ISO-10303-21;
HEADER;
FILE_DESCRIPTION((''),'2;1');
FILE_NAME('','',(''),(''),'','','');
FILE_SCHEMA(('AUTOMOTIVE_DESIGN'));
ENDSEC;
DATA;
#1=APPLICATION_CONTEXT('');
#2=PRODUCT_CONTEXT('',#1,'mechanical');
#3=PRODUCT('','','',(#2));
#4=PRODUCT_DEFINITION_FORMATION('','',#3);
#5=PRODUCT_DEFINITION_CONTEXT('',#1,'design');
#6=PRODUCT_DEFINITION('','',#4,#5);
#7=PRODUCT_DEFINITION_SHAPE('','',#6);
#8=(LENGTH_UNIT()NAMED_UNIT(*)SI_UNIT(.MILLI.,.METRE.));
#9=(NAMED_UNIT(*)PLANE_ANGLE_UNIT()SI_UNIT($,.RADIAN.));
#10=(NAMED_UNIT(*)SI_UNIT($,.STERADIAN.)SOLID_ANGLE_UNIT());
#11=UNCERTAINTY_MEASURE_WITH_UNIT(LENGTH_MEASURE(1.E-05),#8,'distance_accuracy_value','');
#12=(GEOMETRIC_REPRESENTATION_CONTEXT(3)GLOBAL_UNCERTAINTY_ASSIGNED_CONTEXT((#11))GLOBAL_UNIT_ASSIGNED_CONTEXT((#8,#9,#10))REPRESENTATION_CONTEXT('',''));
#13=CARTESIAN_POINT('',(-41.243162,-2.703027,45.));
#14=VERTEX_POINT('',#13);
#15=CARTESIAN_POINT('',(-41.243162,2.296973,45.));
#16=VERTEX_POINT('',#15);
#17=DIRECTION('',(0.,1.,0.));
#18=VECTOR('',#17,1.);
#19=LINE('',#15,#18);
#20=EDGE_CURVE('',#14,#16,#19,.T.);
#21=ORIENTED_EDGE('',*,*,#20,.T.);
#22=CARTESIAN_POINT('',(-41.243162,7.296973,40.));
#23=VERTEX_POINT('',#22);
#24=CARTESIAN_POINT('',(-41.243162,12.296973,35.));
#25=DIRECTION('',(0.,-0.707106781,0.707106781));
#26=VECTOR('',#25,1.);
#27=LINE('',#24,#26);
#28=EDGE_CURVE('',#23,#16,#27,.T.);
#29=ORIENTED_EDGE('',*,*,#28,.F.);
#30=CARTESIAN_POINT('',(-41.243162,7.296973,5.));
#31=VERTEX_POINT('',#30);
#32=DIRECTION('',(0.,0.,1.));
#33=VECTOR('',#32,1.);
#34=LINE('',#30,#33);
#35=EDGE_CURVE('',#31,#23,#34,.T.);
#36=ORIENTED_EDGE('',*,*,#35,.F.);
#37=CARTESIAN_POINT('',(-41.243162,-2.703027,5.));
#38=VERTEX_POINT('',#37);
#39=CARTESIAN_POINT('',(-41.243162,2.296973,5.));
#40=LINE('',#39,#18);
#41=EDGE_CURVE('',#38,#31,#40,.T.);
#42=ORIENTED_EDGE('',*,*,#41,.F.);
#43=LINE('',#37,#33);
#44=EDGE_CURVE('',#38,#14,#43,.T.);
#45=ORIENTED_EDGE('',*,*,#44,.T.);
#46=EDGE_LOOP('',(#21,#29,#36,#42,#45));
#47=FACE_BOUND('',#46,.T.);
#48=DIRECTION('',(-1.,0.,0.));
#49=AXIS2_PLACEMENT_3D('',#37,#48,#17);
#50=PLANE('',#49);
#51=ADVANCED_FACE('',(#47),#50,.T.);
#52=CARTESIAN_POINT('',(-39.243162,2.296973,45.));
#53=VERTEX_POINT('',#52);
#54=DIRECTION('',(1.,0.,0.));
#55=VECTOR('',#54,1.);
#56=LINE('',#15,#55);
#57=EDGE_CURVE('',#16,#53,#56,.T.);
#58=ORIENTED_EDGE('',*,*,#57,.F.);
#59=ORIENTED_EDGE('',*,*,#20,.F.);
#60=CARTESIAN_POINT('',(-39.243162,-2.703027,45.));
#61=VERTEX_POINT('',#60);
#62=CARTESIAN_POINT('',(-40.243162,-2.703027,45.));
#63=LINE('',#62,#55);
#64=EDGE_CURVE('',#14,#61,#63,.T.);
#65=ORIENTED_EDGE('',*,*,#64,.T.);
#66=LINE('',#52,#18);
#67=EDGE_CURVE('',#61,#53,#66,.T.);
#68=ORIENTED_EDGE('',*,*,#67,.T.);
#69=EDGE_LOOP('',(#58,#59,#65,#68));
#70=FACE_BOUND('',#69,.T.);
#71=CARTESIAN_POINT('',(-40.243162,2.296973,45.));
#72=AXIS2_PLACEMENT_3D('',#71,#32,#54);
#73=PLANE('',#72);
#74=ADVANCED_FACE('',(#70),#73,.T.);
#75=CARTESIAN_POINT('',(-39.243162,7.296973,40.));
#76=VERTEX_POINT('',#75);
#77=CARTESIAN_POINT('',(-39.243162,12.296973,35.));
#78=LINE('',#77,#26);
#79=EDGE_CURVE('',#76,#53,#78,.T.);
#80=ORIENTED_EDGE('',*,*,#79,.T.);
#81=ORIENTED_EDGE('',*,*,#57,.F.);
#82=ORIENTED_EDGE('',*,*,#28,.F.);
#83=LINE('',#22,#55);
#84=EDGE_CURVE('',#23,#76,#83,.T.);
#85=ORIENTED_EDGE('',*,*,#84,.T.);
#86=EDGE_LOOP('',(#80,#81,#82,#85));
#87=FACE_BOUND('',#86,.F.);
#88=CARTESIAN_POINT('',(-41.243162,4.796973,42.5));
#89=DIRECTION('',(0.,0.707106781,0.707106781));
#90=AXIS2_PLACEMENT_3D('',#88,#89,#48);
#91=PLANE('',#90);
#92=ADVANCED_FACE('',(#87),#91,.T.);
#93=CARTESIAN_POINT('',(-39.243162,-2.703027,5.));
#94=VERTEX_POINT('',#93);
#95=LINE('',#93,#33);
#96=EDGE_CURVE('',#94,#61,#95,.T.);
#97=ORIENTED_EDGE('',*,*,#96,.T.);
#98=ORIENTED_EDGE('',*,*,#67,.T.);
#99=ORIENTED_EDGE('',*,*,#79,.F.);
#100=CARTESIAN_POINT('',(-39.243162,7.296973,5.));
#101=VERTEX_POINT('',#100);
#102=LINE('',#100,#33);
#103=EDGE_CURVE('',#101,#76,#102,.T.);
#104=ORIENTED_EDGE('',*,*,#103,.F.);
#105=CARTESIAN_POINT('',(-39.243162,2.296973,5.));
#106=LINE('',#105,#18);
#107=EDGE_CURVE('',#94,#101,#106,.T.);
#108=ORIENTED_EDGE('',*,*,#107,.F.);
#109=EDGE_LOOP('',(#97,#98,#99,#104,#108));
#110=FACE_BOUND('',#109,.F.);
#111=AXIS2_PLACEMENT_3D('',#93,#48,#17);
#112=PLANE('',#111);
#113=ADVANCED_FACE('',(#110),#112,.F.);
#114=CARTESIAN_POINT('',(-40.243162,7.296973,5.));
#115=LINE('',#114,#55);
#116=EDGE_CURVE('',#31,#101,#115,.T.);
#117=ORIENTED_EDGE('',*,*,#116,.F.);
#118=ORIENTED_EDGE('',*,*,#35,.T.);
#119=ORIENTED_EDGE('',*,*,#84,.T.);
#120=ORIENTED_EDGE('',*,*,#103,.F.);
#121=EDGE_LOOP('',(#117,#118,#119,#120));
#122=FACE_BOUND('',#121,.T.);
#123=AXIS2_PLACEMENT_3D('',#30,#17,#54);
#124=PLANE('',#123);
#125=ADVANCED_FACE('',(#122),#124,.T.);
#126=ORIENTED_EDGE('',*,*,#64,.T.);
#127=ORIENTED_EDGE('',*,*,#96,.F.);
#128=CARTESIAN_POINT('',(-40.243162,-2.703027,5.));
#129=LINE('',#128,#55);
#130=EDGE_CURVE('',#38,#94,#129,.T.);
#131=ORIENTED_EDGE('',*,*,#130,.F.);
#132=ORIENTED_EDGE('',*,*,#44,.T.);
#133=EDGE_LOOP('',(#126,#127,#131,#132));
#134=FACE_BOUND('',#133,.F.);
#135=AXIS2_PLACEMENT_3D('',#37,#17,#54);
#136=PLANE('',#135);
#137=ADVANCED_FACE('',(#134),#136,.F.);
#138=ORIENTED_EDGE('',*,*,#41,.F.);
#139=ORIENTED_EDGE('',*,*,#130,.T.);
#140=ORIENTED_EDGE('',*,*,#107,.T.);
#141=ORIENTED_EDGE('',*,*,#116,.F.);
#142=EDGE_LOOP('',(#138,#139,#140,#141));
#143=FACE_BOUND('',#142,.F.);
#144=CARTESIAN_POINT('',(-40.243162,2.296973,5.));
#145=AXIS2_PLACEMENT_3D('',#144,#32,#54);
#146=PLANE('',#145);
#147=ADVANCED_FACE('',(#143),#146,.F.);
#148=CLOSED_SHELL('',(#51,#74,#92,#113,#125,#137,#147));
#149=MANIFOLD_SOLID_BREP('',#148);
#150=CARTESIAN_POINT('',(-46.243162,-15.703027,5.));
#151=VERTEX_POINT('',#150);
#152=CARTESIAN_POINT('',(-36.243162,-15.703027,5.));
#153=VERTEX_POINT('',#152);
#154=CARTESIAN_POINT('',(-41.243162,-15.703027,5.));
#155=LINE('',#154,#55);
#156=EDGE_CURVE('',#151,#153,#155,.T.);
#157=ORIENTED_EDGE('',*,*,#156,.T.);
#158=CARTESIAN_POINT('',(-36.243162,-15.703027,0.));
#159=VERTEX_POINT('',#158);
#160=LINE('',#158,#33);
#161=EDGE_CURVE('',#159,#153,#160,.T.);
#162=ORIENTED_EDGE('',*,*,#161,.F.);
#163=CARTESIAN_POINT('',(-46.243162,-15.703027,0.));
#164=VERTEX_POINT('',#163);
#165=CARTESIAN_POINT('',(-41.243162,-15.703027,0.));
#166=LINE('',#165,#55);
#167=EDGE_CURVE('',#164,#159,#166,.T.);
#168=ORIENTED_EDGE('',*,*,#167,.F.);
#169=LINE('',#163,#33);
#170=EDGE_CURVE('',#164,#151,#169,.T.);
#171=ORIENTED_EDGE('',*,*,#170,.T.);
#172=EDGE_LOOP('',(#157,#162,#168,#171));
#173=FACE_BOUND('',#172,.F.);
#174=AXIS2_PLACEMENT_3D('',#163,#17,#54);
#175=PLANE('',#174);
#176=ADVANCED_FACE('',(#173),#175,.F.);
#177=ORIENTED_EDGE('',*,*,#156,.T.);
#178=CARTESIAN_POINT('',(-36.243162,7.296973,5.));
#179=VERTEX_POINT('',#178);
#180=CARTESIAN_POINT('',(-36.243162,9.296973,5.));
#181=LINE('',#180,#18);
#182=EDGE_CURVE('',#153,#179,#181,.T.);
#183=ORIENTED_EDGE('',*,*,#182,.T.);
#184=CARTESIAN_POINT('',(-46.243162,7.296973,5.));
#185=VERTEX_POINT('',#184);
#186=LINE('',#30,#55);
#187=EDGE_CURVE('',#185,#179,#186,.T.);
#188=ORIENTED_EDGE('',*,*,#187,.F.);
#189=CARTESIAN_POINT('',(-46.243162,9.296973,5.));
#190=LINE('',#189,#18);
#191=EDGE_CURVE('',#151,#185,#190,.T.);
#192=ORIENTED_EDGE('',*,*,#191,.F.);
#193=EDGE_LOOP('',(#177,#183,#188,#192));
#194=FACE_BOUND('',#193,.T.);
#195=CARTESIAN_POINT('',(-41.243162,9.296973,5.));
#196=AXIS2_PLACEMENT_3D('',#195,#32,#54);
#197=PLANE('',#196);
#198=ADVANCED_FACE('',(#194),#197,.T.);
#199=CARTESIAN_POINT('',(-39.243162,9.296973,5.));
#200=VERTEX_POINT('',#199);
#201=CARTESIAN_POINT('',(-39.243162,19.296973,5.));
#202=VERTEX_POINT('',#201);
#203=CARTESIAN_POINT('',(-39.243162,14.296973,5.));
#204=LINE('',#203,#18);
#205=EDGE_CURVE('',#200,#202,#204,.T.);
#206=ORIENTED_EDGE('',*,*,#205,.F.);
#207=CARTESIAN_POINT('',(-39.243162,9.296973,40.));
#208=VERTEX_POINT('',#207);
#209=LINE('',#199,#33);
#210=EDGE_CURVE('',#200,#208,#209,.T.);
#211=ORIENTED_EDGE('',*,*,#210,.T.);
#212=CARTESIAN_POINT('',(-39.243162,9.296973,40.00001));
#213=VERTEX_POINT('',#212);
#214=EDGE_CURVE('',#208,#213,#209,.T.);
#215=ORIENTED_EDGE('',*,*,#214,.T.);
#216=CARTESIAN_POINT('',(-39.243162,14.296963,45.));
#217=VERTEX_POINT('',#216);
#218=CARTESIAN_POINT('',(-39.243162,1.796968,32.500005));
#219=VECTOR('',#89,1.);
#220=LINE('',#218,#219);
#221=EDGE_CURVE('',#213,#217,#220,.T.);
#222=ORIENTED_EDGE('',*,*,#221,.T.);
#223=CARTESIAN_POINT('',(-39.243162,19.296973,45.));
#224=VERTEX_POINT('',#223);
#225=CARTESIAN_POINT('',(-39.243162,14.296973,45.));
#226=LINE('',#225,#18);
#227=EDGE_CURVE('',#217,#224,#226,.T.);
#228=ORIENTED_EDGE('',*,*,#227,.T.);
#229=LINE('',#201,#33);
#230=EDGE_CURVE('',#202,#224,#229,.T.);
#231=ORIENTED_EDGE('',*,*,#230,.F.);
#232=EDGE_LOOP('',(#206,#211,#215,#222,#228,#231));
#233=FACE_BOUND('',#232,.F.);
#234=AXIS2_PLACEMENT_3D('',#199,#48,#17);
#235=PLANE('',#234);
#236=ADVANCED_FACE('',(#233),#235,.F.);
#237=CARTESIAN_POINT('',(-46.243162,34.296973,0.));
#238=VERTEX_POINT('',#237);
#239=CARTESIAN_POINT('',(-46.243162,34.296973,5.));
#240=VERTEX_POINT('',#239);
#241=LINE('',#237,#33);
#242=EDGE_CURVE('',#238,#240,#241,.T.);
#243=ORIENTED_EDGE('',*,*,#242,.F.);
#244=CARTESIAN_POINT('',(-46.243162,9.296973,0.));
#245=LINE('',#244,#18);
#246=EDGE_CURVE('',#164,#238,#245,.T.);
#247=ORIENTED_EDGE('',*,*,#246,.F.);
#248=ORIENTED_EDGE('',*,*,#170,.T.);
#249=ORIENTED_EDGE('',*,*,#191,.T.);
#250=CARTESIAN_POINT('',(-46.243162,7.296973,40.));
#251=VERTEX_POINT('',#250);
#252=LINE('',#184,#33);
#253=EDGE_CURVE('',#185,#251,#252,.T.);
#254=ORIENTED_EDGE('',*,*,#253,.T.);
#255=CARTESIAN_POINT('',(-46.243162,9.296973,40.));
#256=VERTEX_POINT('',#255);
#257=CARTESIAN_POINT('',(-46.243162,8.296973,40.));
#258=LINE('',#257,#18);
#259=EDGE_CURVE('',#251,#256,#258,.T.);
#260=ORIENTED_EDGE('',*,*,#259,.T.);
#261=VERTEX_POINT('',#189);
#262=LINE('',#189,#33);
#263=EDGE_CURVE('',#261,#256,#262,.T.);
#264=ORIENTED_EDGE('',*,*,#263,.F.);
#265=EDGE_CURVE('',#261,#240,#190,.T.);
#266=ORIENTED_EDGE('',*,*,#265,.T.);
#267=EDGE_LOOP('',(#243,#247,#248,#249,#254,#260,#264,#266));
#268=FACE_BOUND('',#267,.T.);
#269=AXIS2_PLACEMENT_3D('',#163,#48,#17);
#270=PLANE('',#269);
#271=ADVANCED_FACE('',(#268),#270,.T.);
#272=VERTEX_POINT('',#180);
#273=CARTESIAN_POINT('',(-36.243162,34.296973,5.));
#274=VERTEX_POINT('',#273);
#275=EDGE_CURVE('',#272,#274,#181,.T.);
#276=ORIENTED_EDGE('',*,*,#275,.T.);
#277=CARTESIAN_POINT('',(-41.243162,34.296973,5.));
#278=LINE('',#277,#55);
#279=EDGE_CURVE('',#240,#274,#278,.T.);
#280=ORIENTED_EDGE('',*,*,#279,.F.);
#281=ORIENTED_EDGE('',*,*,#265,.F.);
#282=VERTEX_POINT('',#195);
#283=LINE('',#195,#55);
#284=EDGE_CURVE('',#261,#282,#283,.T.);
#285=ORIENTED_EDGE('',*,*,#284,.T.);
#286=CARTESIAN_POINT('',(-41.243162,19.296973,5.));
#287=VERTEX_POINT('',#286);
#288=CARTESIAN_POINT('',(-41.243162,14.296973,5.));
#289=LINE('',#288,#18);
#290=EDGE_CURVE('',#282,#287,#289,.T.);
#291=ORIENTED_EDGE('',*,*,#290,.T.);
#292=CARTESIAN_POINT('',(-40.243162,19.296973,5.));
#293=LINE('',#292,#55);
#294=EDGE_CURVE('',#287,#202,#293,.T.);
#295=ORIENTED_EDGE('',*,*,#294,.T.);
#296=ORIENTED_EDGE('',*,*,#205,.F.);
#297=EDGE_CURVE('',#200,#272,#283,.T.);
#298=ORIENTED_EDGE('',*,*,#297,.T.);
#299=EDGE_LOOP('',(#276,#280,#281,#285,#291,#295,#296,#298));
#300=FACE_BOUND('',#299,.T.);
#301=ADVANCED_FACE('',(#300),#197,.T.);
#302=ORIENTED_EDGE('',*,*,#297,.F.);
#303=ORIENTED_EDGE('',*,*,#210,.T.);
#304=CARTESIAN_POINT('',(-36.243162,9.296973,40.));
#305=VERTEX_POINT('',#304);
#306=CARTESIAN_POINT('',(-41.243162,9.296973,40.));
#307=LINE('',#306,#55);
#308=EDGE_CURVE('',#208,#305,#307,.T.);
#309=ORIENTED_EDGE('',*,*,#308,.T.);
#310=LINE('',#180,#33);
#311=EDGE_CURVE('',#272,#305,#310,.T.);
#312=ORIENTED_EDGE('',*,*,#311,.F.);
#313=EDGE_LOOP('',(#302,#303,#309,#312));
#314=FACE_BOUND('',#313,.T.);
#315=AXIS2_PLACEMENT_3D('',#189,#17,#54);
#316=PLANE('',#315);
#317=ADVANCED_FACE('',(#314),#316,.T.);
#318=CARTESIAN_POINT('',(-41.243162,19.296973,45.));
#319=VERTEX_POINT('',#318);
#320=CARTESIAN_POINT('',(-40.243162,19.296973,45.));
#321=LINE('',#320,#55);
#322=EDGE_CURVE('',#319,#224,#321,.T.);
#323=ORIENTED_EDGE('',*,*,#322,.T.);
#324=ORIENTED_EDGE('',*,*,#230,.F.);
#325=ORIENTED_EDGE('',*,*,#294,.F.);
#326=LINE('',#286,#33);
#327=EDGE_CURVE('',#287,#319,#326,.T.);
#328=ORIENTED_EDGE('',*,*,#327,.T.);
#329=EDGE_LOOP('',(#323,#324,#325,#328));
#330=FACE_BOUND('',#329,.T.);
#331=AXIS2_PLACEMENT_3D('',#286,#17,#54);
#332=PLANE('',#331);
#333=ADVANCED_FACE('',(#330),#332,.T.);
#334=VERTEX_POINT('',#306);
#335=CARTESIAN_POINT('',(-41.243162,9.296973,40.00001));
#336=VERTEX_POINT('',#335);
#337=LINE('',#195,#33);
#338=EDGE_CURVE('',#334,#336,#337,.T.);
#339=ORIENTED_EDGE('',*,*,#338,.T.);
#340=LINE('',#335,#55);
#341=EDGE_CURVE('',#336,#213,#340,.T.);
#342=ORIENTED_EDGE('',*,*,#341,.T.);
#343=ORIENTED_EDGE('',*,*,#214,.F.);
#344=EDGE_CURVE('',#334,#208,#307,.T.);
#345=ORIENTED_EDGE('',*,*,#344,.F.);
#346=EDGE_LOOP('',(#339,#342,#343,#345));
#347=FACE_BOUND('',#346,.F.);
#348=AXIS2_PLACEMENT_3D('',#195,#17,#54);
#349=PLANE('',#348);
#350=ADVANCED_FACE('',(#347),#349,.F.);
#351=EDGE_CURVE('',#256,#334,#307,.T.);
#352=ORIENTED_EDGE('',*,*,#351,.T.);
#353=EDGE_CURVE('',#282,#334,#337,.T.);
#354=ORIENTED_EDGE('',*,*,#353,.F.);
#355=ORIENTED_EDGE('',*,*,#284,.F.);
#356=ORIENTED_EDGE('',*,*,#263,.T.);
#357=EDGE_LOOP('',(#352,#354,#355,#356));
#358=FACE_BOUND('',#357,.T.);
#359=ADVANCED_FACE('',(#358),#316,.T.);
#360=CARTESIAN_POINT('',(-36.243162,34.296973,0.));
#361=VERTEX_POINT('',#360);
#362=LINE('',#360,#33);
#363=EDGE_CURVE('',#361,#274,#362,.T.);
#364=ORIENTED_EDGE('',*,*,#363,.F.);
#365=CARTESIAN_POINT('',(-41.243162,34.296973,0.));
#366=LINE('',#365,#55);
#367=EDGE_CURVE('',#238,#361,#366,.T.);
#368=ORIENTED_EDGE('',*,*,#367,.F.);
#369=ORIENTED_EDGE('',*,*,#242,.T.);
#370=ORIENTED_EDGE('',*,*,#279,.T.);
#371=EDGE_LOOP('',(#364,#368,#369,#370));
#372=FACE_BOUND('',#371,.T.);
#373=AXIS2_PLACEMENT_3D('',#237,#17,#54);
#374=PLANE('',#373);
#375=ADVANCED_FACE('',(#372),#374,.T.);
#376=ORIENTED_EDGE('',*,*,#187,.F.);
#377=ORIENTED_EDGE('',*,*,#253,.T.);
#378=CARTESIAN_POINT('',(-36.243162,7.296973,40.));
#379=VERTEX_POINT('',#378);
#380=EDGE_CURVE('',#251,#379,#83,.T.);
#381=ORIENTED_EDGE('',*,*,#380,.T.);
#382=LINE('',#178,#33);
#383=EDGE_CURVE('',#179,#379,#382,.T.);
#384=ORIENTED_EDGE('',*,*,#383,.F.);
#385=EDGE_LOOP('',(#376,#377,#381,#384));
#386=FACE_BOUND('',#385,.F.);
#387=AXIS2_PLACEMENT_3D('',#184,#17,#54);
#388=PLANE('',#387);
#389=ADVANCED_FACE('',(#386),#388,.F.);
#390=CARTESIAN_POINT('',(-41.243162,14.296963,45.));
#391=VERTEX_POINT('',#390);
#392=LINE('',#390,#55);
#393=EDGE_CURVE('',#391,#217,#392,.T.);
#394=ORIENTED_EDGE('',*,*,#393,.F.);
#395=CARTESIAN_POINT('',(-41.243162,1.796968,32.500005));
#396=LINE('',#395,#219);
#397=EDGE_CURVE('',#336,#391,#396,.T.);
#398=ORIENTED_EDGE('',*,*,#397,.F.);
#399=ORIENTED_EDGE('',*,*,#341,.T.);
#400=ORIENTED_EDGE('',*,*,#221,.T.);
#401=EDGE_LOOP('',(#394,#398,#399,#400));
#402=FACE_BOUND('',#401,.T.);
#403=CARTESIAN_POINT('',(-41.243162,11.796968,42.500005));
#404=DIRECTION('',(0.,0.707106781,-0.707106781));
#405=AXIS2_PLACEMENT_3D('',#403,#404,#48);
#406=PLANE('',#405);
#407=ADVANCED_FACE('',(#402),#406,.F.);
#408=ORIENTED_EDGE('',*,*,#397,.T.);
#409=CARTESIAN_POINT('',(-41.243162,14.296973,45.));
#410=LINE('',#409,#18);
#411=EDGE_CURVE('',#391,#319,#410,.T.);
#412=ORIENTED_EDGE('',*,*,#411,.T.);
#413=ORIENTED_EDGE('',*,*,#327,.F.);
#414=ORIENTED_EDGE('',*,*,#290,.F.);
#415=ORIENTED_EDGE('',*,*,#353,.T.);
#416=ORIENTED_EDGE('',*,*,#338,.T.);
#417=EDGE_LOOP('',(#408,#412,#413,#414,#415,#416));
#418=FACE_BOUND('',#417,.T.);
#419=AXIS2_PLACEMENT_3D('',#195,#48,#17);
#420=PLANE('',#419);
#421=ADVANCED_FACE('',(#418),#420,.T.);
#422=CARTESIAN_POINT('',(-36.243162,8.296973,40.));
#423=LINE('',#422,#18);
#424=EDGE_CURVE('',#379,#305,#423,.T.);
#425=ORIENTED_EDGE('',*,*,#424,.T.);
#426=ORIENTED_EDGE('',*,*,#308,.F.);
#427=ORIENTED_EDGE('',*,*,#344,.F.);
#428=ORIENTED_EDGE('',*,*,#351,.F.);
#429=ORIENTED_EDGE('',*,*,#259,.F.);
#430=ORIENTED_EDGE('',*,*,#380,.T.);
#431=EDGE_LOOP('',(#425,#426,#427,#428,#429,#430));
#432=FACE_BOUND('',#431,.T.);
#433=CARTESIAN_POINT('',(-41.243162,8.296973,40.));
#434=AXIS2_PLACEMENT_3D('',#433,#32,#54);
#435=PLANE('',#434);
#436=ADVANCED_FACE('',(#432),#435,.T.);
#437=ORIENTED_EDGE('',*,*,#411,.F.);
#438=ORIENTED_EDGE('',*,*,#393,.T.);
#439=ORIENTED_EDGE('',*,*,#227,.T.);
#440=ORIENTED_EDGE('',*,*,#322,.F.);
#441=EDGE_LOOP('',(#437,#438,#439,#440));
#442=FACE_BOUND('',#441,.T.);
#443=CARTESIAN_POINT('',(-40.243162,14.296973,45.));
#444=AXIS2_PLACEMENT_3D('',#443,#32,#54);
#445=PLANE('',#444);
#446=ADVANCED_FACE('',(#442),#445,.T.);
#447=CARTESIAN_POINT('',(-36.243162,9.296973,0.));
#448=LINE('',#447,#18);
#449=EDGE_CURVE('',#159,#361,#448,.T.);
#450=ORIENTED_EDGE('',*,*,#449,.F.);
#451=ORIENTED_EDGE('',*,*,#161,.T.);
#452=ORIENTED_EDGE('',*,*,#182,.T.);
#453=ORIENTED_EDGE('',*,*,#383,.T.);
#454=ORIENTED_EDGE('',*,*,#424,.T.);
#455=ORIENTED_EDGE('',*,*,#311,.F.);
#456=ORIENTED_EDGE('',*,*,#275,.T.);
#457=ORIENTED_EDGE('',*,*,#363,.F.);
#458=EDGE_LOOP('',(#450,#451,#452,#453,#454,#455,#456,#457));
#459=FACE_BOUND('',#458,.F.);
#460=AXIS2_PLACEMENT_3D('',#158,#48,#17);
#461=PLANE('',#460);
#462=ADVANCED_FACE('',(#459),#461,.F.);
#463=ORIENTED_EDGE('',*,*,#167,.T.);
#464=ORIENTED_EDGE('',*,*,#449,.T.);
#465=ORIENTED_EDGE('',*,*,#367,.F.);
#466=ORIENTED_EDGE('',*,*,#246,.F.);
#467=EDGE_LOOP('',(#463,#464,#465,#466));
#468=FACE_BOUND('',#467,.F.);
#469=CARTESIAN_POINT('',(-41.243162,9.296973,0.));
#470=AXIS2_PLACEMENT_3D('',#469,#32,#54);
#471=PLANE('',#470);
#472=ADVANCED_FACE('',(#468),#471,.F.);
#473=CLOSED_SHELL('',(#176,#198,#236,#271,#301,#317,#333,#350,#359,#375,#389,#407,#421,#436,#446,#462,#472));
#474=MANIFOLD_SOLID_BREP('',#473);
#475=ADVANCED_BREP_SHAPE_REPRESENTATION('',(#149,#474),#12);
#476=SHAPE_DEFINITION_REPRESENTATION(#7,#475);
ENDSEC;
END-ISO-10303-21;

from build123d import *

# Parameters (mm, degrees)
F0_W     = 10
F0_H     = 50
F1_DEPTH = 5
F2_W     = 10
F2_H     = 2
F3_DEPTH = 35
F4_W     = 2
F4_H     = 10
F5_DEPTH = 40
F6_W     = 2
F6_H     = 10
F7_DEPTH = 40
F8_SIZE  = 5
F9_SIZE  = 4.99999


# Not quite as in the source:
# - a fillet or chamfer is up to 0.001 mm smaller than in the source, because OpenCascade refuses the exact size


with BuildPart() as f1:
    # F0 (on Top) → F1 (new body)
    with BuildSketch(Plane.XY):
        with Locations((-41.2431620061, 9.2969734803)):
            Rectangle(F0_W, F0_H)
    extrude(amount=F1_DEPTH)

    # F2 (on face) → F3 (join)
    with BuildSketch(Plane.XY.offset(5)):
        with Locations((-41.2431620061, 8.2969734803)):
            Rectangle(F2_W, F2_H)
    extrude(amount=F3_DEPTH)

    # F6 (on face) → F7 (join)
    with BuildSketch(Plane.XY.offset(5)):
        with Locations((-40.2431620061, 14.2969734803)):
            Rectangle(F6_W, F6_H)
    extrude(amount=F7_DEPTH)

    # F9 (size 5 in the source; OpenCascade refuses exactly that, so slightly less here)
    f9_edges = [f1.edges().sort_by_distance(p)[0] for p in [
        (-40.243162, 9.296973, 45),
    ]]
    chamfer(f9_edges, length=F9_SIZE)


with BuildPart() as f5:
    # F4 (on face) → F5 (new body)
    with BuildSketch(Plane.XY.offset(5)):
        with Locations((-40.2431620061, 2.2969734803)):
            Rectangle(F4_W, F4_H)
    extrude(amount=F5_DEPTH)

    # F8
    f8_edges = [f5.edges().sort_by_distance(p)[0] for p in [
        (-40.243162, 7.296973, 45),
    ]]
    chamfer(f8_edges, length=F8_SIZE)


solid = Compound([f1.part, f5.part])
